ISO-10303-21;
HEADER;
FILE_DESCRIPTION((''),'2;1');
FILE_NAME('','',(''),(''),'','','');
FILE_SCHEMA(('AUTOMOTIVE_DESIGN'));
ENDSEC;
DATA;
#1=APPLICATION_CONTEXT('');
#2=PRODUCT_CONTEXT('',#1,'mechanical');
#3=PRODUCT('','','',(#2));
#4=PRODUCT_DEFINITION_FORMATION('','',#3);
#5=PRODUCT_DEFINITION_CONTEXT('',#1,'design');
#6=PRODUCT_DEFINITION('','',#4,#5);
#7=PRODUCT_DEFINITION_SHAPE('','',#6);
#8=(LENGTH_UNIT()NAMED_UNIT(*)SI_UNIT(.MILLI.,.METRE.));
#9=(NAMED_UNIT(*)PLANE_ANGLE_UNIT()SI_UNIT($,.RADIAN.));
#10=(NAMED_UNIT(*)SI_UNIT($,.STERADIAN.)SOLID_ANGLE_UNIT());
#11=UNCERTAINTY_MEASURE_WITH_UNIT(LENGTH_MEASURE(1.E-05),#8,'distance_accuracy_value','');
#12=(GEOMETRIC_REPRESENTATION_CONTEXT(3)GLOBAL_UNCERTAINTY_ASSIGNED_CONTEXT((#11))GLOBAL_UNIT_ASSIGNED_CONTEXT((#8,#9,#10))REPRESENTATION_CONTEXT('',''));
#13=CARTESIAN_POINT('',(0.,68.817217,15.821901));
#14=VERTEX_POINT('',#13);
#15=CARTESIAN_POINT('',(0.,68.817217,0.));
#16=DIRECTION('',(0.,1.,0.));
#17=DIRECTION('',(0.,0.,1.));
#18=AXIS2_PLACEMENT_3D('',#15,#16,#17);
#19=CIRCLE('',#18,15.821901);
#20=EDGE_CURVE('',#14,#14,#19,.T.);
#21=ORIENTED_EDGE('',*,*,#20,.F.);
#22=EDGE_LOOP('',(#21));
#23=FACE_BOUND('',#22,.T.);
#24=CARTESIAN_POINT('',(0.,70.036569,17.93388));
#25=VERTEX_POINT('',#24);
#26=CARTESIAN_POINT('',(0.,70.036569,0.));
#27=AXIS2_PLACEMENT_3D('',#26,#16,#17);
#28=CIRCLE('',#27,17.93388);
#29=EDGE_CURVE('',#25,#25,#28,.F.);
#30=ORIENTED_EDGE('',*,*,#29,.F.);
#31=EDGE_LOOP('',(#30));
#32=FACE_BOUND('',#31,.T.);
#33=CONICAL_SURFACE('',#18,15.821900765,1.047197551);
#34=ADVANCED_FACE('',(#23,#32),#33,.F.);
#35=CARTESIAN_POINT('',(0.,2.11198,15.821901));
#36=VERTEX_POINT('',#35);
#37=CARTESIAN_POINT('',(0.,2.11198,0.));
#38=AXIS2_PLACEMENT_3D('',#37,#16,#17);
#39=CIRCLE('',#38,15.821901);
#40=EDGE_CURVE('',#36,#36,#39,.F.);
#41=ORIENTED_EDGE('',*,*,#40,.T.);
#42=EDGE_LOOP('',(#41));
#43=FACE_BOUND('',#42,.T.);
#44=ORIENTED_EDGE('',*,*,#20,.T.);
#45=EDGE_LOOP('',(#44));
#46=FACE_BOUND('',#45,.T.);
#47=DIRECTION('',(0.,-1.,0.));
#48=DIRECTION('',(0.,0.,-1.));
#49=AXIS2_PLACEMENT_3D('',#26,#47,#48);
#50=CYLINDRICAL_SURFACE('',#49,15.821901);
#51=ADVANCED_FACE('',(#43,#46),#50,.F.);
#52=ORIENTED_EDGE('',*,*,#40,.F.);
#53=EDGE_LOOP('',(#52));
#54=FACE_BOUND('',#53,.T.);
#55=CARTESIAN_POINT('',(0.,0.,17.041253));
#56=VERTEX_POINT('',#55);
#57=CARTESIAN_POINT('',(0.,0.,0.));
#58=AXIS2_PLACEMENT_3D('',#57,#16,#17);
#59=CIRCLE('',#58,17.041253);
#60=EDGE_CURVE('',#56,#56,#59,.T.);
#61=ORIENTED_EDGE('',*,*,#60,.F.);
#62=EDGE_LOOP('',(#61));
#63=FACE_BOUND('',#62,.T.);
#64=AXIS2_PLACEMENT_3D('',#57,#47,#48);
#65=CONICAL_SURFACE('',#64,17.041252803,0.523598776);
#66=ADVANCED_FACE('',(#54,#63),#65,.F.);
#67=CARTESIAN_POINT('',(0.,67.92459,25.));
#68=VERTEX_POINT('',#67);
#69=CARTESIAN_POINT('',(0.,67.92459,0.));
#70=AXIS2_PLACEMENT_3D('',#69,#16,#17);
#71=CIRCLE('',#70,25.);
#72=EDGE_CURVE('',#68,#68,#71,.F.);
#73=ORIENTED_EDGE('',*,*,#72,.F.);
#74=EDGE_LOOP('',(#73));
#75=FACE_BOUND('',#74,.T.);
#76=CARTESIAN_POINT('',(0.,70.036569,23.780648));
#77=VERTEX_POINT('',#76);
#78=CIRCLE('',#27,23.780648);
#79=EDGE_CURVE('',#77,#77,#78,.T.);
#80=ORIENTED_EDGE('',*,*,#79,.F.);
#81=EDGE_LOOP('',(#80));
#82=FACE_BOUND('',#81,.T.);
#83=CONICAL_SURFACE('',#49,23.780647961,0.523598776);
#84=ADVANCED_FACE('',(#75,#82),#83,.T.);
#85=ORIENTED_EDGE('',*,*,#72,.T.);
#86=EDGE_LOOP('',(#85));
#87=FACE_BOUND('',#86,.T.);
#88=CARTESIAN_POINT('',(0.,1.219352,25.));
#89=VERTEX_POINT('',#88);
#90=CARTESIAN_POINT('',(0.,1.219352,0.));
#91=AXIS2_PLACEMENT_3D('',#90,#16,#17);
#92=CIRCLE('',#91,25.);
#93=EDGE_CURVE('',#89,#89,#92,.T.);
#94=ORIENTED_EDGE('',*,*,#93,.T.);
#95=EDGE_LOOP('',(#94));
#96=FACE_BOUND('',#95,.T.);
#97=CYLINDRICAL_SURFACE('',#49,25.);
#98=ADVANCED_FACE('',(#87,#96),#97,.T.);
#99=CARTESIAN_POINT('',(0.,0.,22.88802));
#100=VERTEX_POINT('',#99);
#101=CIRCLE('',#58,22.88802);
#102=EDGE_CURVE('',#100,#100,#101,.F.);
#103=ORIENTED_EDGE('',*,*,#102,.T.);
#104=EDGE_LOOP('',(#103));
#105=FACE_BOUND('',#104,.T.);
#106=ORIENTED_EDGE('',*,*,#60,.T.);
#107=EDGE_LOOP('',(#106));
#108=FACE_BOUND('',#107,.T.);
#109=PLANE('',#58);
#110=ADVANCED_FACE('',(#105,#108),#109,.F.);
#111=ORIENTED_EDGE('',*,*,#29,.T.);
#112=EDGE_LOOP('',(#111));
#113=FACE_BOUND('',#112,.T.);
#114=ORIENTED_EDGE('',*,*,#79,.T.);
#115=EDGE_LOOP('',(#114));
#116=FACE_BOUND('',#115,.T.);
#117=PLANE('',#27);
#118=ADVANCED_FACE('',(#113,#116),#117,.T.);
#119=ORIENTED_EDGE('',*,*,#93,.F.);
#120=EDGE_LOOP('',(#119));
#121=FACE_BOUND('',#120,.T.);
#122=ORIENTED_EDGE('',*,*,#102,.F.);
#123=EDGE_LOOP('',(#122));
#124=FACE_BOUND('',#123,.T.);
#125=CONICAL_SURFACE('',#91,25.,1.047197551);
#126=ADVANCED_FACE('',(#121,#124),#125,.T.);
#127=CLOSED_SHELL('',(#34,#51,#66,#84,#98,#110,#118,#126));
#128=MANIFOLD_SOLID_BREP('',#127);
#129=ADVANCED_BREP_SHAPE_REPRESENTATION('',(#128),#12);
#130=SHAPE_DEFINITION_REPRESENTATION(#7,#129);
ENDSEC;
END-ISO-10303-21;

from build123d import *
from OCP.BRepFilletAPI import BRepFilletAPI_MakeChamfer

# Parameters (mm, degrees)
SKETCH1_R           = 25
BOSS_EXTRUDE1_DEPTH = 70.03656948
SKETCH2_R           = 15.821900765
CUT_EXTRUDE1_DEPTH  = 79.454579628
CHAMFER1_SIZE       = 2.111979683
CHAMFER1_SIZE2      = 1.219352039


with BuildPart() as part:
    # Sketch1 → Boss-Extrude1 (new body)
    with BuildSketch(Plane(origin=(0, 0, 0), x_dir=(1, 0, 0), z_dir=(0, 1, 0))):
        Circle(SKETCH1_R)
    extrude(amount=BOSS_EXTRUDE1_DEPTH)

    # Sketch2 → Cut-Extrude1 (cut, through all)
    with BuildSketch(Plane(origin=(0, 0, 0), x_dir=(1, 0, 0), z_dir=(0, 1, 0))):
        Circle(SKETCH2_R)
    extrude(amount=CUT_EXTRUDE1_DEPTH, mode=Mode.SUBTRACT)

    # Chamfer1: one chamfer whose edges measure the first distance from different faces: ONE call of the kernel's chamfer builder (chamfer() names one face for all edges)
    chamfer1_edges_1 = [part.edges().sort_by_distance(p)[0] for p in [
        (-15.821900765, 70.03656948, 0),
    ]]
    chamfer1_side_1 = [part.faces().sort_by_distance(p)[0] for p in [
        (-24.292893219, 70.03656948, 0),
    ]]
    chamfer1_edges_2 = [part.edges().sort_by_distance(p)[0] for p in [
        (-15.821900765, 0, 0),
    ]]
    chamfer1_side_2 = [part.faces().sort_by_distance(p)[0] for p in [
        (-15.821900765, 35.01828474, 0),
    ]]
    chamfer1_edges_3 = [part.edges().sort_by_distance(p)[0] for p in [
        (-25, 0, 0),
    ]]
    chamfer1_side_3 = [part.faces().sort_by_distance(p)[0] for p in [
        (-24.292893219, 0, 0),
    ]]
    chamfer1_edges_4 = [part.edges().sort_by_distance(p)[0] for p in [
        (-25, 70.03656948, 0),
    ]]
    chamfer1_side_4 = [part.faces().sort_by_distance(p)[0] for p in [
        (-25, 35.01828474, 0),
    ]]
    chamfer1 = BRepFilletAPI_MakeChamfer(part.part.solid().wrapped)
    for e in chamfer1_edges_1:
        chamfer1.Add(CHAMFER1_SIZE, CHAMFER1_SIZE2, e.wrapped, chamfer1_side_1[0].wrapped)  # the first distance lies on this face
    for e in chamfer1_edges_2:
        chamfer1.Add(CHAMFER1_SIZE, CHAMFER1_SIZE2, e.wrapped, chamfer1_side_2[0].wrapped)  # the first distance lies on this face
    for e in chamfer1_edges_3:
        chamfer1.Add(CHAMFER1_SIZE, CHAMFER1_SIZE2, e.wrapped, chamfer1_side_3[0].wrapped)  # the first distance lies on this face
    for e in chamfer1_edges_4:
        chamfer1.Add(CHAMFER1_SIZE, CHAMFER1_SIZE2, e.wrapped, chamfer1_side_4[0].wrapped)  # the first distance lies on this face
    add(Compound.cast(chamfer1.Shape()), mode=Mode.REPLACE)


solid = part.part
